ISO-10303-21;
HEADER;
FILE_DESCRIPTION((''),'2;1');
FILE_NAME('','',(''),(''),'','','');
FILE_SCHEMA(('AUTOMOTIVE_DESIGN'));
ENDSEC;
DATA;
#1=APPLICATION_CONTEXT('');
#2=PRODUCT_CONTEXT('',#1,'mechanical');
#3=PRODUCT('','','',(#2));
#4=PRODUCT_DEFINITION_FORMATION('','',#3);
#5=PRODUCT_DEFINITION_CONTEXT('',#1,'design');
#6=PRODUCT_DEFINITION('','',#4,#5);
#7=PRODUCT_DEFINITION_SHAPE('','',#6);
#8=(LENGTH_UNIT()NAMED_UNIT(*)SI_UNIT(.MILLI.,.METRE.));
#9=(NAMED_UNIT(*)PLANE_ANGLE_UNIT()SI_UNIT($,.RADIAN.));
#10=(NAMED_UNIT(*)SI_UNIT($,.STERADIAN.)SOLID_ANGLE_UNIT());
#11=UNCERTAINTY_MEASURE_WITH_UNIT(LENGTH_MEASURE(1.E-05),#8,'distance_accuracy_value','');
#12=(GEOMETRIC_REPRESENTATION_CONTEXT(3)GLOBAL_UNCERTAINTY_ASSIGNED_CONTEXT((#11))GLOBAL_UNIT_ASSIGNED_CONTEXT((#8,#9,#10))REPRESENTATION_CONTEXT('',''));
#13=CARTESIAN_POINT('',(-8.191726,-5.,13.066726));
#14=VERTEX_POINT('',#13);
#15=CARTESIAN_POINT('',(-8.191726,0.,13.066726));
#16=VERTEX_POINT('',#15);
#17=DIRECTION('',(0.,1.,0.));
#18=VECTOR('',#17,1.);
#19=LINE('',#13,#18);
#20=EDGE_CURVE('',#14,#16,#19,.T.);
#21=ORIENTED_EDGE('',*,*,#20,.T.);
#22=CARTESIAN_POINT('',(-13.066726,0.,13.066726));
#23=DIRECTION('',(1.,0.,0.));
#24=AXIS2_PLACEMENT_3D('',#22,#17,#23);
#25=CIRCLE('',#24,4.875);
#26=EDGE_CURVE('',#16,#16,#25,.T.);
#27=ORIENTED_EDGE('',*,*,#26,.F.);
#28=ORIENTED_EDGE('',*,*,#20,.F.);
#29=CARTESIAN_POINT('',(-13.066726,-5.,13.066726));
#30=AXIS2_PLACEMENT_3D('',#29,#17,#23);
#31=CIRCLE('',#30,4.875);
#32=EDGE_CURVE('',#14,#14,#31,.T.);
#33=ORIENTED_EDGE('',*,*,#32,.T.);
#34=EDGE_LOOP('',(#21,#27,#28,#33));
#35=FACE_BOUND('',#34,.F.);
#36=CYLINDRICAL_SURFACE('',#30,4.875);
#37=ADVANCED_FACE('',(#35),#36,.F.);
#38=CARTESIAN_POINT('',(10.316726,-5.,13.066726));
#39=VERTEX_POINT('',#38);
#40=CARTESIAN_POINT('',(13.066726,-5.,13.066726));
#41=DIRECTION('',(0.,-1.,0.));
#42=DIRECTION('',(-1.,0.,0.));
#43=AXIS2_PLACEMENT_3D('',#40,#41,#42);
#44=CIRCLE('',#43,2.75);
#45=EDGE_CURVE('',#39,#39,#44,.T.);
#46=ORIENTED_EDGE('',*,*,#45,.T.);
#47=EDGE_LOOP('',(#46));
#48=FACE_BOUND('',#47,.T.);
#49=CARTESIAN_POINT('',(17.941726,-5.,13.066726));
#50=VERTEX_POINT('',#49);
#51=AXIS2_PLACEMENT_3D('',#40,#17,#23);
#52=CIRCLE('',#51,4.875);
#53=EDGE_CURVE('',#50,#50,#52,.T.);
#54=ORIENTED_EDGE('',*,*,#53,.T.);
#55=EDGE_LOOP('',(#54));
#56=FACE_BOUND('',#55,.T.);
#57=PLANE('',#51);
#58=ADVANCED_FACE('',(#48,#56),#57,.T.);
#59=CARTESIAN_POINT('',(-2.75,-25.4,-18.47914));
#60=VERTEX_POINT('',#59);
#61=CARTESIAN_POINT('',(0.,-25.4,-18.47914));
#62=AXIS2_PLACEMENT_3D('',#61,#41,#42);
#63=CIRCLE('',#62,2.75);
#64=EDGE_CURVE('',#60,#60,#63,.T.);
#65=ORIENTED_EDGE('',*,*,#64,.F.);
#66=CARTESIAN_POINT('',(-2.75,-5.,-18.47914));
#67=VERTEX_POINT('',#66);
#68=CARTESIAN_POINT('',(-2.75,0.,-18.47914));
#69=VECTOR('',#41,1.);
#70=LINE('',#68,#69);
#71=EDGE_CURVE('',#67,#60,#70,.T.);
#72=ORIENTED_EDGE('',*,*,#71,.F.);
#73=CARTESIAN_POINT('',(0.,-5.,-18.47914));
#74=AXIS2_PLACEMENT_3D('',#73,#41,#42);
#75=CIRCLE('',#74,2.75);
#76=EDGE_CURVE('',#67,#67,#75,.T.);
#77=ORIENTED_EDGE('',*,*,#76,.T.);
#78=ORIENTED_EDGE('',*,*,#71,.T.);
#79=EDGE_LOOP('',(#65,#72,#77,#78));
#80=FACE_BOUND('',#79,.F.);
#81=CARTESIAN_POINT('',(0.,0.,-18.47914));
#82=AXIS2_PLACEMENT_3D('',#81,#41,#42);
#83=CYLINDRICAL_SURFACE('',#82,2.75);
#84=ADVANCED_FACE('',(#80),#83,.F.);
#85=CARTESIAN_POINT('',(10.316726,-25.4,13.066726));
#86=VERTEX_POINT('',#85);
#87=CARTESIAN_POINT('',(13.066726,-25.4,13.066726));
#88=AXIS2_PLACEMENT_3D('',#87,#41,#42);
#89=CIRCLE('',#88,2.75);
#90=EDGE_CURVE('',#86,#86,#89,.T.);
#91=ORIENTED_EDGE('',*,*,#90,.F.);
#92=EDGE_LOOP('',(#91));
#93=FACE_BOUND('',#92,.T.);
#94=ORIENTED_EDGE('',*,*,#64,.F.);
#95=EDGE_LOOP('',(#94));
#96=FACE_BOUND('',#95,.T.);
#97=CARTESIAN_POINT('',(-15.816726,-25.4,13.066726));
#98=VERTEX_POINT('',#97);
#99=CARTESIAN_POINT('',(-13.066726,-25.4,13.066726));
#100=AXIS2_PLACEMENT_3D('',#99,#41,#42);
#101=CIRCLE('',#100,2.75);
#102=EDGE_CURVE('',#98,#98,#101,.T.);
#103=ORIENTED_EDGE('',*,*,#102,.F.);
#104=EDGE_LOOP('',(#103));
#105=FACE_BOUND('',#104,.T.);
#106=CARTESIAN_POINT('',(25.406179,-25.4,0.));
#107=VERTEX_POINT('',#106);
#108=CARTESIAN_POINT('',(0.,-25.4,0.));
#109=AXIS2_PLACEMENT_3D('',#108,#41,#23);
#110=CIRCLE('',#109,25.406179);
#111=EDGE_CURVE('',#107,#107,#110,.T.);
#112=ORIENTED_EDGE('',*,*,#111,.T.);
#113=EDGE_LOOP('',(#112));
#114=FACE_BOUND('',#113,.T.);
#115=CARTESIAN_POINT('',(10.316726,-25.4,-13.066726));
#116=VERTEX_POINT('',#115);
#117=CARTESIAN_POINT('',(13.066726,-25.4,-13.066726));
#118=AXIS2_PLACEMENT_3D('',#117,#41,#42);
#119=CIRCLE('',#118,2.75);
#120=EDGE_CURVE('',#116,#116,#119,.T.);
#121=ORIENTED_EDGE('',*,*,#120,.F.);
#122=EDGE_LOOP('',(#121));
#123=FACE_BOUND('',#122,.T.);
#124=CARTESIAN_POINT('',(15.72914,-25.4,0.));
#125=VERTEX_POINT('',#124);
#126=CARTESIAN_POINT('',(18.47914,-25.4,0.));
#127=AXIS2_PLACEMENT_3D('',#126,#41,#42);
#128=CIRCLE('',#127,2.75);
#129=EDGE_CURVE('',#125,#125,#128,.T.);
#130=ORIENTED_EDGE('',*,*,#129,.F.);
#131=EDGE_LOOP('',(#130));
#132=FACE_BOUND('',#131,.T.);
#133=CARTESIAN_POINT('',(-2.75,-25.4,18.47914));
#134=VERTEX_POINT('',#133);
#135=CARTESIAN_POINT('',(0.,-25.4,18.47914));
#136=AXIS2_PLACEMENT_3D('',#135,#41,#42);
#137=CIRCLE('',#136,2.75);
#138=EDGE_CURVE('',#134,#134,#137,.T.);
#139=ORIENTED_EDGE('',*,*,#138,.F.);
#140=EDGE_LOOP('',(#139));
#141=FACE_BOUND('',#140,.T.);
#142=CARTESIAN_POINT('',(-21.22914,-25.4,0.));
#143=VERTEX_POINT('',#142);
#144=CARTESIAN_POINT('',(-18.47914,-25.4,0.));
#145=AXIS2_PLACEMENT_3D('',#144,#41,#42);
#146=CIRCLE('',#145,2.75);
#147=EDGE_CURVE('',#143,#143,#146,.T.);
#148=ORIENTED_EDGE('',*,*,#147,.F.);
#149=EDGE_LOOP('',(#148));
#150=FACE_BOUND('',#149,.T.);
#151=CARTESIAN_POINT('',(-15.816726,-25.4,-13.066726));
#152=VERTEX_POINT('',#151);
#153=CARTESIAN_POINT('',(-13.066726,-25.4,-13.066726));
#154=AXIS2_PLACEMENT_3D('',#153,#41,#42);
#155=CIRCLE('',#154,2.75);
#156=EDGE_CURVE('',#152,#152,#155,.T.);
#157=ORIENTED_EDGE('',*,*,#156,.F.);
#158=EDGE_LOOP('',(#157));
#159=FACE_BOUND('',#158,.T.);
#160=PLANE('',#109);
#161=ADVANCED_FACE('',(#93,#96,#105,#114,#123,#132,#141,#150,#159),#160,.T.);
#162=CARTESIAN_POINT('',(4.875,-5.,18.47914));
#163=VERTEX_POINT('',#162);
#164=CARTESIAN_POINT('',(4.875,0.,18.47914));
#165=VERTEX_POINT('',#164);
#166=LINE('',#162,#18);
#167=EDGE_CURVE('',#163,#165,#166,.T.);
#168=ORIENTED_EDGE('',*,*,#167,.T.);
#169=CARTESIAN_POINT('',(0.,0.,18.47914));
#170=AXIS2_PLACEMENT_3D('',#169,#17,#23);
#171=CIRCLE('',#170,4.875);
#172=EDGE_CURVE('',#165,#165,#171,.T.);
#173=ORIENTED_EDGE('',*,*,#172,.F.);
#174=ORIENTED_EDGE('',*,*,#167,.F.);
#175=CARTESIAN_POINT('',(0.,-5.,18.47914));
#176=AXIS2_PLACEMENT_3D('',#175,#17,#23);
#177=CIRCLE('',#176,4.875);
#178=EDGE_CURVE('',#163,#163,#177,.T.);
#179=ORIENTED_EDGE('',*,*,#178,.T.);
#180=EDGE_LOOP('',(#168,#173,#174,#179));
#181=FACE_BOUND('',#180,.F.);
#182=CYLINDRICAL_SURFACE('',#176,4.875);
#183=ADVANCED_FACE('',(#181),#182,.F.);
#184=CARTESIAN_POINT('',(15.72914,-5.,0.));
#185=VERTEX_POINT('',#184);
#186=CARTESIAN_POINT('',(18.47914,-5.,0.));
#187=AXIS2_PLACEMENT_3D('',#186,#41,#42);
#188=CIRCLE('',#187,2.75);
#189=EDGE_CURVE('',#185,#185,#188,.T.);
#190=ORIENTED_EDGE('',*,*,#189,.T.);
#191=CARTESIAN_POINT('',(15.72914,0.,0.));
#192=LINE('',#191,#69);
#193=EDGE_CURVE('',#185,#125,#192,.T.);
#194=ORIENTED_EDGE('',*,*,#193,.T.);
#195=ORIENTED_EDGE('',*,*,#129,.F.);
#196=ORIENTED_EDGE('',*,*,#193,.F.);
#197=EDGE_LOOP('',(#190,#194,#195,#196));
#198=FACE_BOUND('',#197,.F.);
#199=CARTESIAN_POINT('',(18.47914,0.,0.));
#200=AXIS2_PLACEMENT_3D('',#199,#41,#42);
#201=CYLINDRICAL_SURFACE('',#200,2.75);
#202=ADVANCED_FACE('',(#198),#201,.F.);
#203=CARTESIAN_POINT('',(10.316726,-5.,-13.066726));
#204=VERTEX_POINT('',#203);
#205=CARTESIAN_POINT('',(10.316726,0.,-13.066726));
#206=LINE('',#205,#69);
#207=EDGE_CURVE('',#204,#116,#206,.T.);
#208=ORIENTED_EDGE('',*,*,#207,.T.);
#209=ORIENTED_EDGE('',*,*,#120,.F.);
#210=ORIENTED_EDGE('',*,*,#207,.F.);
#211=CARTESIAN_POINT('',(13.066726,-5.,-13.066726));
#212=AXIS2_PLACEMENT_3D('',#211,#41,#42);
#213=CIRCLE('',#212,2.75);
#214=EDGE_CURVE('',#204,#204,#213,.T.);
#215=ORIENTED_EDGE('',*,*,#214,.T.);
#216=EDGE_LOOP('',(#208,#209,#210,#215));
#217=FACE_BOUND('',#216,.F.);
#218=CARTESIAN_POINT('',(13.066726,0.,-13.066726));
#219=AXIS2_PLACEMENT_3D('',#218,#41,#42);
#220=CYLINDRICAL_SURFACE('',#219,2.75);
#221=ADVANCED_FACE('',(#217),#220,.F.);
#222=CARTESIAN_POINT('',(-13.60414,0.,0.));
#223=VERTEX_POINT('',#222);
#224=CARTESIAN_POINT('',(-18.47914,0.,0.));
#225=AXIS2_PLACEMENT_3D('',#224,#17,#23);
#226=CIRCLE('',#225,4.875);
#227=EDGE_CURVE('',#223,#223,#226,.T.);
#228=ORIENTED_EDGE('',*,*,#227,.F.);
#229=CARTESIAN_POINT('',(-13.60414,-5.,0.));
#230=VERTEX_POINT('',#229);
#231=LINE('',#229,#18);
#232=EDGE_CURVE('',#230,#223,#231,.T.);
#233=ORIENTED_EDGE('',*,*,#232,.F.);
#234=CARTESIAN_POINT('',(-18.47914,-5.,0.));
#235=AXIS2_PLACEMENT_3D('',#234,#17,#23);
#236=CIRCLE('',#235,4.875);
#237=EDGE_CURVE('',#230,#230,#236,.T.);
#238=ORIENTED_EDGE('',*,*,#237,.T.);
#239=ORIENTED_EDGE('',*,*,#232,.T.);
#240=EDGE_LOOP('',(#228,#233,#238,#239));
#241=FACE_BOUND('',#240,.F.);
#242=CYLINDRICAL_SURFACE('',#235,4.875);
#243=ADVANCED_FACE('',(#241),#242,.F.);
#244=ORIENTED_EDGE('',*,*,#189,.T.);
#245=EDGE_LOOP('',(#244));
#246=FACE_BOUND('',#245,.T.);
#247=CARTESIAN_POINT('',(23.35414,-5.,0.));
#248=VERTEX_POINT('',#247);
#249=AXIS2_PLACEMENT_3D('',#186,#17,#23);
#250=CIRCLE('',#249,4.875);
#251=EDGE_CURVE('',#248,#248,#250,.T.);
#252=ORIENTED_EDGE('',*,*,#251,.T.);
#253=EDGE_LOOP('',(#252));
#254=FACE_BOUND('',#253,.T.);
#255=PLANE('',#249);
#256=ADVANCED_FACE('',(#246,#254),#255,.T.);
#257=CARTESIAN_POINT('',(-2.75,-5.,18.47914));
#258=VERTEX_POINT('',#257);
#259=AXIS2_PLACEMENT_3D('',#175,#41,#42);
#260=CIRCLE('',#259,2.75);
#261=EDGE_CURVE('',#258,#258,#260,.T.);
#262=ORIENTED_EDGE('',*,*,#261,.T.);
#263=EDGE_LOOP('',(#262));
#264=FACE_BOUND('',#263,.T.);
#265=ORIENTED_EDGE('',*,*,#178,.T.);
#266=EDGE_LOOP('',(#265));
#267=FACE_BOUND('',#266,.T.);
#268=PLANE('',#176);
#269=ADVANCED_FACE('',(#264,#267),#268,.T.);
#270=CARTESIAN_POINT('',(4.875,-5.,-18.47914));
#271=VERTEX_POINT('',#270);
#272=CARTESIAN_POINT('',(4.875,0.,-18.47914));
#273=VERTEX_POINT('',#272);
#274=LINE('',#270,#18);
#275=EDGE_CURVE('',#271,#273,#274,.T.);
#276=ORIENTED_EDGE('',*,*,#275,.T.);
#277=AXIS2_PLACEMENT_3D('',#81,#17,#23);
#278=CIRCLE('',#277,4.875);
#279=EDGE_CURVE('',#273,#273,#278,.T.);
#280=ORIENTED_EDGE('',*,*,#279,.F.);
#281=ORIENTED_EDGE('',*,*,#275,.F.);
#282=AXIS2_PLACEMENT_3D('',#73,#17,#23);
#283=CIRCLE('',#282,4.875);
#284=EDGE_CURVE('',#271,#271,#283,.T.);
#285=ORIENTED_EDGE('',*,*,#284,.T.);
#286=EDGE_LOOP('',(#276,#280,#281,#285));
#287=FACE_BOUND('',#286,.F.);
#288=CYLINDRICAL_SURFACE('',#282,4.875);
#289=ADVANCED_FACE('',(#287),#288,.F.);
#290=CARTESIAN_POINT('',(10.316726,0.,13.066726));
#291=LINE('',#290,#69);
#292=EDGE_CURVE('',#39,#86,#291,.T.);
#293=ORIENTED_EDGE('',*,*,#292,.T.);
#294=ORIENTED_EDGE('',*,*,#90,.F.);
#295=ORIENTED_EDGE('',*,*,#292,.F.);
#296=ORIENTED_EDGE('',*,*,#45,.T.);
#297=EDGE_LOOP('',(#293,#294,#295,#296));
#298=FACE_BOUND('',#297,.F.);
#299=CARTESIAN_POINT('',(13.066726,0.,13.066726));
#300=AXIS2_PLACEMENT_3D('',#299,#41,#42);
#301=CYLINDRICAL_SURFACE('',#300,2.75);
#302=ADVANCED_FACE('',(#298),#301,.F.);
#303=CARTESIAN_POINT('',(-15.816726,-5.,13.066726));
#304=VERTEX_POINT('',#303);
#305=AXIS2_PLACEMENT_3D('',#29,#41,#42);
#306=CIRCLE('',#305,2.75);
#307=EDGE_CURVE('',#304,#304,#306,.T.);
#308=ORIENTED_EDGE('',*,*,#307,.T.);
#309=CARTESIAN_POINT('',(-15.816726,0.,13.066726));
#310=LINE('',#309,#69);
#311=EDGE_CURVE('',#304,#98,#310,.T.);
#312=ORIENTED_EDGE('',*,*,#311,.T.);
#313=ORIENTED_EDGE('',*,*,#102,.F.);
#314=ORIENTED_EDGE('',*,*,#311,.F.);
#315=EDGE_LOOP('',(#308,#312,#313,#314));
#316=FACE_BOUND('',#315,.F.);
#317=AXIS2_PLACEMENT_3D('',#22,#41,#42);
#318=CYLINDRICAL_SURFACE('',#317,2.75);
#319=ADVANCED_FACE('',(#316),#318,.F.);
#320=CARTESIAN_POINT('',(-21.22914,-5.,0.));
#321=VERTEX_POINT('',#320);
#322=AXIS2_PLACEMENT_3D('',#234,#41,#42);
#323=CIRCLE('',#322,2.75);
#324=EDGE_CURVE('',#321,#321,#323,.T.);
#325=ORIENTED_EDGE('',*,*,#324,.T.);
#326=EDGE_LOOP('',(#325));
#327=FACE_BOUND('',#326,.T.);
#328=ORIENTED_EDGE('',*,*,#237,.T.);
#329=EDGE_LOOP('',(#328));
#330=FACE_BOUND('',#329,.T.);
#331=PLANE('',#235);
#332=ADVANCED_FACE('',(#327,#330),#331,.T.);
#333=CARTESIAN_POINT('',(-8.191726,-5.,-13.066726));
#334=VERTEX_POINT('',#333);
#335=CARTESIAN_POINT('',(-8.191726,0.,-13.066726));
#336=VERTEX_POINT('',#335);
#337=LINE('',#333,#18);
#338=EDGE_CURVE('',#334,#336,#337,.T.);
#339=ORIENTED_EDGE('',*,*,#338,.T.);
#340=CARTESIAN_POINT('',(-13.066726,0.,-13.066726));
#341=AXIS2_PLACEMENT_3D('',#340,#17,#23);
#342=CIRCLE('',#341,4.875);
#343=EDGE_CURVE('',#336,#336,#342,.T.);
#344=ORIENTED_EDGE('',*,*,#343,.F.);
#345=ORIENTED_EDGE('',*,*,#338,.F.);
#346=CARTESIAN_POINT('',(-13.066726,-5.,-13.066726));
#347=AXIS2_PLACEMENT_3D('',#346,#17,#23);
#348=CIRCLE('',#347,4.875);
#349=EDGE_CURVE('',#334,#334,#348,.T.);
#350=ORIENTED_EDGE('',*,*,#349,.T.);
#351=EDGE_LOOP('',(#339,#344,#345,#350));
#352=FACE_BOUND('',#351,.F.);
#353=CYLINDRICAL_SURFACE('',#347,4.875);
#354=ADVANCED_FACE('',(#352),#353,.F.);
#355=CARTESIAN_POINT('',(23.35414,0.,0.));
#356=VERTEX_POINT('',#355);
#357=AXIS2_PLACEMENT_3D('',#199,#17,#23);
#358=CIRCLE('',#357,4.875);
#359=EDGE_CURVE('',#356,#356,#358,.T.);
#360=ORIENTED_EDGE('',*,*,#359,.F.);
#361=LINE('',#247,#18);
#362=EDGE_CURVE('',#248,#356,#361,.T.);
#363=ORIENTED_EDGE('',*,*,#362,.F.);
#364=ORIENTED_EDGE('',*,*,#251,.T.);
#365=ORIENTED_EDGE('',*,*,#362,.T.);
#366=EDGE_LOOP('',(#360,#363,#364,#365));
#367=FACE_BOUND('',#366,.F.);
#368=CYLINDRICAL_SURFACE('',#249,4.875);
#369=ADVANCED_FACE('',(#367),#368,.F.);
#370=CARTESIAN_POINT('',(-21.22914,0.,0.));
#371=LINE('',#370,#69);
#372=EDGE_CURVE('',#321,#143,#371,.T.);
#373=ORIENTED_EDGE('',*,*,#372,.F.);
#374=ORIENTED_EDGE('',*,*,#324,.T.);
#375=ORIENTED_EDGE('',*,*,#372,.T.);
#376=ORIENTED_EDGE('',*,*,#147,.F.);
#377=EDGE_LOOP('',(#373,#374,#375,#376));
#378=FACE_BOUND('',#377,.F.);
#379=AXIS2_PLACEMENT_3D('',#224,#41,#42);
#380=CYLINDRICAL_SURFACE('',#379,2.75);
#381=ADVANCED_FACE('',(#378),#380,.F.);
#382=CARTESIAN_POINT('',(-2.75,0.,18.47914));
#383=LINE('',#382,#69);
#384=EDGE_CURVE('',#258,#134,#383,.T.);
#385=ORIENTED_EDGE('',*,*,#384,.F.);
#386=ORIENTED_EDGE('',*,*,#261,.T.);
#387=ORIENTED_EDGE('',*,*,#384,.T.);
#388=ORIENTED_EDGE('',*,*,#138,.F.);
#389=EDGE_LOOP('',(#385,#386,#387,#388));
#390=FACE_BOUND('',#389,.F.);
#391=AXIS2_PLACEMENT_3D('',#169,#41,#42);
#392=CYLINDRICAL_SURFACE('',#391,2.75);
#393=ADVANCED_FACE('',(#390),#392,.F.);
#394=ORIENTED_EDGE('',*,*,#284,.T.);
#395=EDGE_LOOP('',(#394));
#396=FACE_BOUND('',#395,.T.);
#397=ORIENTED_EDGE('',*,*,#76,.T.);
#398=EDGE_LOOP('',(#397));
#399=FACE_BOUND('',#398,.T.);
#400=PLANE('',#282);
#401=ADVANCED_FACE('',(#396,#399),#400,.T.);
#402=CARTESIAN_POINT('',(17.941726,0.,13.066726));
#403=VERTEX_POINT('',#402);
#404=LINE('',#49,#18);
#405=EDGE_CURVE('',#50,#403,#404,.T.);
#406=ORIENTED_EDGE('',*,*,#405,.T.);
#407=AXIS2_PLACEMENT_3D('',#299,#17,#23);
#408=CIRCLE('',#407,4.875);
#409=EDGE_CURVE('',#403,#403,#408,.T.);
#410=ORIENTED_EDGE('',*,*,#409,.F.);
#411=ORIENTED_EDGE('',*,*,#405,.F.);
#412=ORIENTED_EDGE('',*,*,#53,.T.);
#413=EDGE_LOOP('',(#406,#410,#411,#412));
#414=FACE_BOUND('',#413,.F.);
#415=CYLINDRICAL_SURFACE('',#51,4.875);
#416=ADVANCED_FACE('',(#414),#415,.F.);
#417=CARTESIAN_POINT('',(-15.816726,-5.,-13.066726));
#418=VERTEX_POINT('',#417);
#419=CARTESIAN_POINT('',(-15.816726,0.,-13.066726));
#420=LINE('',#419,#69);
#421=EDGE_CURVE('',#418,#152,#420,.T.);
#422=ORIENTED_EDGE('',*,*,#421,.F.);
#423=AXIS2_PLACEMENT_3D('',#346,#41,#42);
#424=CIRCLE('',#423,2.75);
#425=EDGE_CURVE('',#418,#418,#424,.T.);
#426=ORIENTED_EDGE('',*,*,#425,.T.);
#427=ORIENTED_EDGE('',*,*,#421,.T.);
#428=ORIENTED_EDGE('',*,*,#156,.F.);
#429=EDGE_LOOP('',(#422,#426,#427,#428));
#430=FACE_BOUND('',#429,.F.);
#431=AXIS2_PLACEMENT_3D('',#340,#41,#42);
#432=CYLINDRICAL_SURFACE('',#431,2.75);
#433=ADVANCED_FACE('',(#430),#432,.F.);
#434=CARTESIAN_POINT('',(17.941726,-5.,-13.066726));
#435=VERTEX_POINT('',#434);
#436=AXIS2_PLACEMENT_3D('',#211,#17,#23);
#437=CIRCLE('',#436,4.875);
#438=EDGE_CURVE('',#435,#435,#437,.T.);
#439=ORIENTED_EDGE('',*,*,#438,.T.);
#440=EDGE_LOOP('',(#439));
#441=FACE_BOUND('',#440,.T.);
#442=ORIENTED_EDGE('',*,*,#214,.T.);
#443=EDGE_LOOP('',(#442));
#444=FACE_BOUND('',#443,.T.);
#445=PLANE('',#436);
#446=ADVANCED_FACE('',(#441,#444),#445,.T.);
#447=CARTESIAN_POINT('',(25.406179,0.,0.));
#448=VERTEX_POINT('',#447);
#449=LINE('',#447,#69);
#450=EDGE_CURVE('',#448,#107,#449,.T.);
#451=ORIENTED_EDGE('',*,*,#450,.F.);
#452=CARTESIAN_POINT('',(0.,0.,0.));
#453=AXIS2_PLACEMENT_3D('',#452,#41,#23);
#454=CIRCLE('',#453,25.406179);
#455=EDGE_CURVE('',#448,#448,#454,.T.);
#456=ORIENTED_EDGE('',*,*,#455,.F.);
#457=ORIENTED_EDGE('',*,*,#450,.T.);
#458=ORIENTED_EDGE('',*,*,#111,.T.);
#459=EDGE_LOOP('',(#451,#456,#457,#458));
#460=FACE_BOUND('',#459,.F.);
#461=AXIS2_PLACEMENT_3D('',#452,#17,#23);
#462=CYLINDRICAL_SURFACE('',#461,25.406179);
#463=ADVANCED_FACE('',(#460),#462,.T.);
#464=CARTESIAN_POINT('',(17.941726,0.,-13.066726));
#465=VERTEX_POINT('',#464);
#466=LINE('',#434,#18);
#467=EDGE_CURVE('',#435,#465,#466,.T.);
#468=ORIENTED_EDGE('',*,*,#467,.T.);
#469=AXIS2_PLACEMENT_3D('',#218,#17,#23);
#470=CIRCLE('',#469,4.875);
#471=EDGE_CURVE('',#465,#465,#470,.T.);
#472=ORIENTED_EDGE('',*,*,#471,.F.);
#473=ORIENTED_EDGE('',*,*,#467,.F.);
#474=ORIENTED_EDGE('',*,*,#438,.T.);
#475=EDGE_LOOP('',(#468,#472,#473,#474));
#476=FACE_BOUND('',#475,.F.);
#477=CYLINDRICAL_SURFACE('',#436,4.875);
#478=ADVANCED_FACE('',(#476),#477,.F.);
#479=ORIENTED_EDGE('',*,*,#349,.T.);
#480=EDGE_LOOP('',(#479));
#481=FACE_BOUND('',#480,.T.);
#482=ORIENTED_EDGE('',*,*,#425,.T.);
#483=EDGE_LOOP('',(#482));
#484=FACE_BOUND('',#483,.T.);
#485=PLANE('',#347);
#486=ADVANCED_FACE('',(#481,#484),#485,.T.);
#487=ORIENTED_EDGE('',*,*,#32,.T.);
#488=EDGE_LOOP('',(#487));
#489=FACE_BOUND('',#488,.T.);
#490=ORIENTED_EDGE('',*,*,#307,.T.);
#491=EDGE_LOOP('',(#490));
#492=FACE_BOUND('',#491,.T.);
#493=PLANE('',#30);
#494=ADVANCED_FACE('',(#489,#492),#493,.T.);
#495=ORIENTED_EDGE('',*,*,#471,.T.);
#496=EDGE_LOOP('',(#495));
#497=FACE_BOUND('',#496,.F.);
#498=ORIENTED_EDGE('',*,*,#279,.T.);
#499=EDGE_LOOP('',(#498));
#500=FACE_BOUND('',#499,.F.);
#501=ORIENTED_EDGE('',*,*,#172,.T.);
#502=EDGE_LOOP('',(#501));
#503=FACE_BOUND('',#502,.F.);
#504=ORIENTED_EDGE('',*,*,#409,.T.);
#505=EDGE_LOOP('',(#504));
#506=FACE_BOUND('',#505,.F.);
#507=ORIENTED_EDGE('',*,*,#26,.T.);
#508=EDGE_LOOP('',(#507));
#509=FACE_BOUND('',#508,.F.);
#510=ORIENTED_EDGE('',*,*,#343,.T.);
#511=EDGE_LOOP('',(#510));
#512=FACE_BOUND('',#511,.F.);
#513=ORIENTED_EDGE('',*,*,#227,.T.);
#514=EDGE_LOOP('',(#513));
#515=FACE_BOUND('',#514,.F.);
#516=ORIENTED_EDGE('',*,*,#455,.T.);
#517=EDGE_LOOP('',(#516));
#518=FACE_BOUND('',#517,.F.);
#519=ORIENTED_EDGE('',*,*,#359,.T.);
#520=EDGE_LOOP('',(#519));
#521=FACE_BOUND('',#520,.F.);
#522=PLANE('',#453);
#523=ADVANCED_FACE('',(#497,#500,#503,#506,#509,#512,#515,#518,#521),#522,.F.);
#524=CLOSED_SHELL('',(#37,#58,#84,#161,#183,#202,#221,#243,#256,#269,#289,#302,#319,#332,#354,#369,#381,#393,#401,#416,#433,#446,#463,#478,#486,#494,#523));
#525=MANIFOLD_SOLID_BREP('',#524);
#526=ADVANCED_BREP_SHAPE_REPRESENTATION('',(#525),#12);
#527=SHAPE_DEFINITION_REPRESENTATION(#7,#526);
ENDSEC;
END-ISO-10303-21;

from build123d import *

# Parameters (mm, degrees)
F0_R           = 25.4061794045
F1_DEPTH       = 25.4
F2_D           = 5.5
F2_CBORE_D     = 9.75
F2_CBORE_DEPTH = 5


with BuildPart() as f1:
    # F0 (on Front) → F1 (new body)
    with BuildSketch(Plane.XZ):
        Circle(F0_R)
    extrude(amount=F1_DEPTH)

    # F2 (through all)
    with Locations(Plane(origin=(0, 0, 0), x_dir=(1, 0, 0), z_dir=(0, 1, 0))):
        with Locations((0, -18.4791404754), (-13.0667255406, -13.0667255406), (-18.4791404754, 0), (-13.0667255406, 13.0667255406), (0, 18.4791404754), (13.0667255406, 13.0667255406), (18.4791404754, 0), (13.0667255406, -13.0667255406)):
            CounterBoreHole(F2_D / 2, F2_CBORE_D / 2, F2_CBORE_DEPTH)


solid = f1.part
